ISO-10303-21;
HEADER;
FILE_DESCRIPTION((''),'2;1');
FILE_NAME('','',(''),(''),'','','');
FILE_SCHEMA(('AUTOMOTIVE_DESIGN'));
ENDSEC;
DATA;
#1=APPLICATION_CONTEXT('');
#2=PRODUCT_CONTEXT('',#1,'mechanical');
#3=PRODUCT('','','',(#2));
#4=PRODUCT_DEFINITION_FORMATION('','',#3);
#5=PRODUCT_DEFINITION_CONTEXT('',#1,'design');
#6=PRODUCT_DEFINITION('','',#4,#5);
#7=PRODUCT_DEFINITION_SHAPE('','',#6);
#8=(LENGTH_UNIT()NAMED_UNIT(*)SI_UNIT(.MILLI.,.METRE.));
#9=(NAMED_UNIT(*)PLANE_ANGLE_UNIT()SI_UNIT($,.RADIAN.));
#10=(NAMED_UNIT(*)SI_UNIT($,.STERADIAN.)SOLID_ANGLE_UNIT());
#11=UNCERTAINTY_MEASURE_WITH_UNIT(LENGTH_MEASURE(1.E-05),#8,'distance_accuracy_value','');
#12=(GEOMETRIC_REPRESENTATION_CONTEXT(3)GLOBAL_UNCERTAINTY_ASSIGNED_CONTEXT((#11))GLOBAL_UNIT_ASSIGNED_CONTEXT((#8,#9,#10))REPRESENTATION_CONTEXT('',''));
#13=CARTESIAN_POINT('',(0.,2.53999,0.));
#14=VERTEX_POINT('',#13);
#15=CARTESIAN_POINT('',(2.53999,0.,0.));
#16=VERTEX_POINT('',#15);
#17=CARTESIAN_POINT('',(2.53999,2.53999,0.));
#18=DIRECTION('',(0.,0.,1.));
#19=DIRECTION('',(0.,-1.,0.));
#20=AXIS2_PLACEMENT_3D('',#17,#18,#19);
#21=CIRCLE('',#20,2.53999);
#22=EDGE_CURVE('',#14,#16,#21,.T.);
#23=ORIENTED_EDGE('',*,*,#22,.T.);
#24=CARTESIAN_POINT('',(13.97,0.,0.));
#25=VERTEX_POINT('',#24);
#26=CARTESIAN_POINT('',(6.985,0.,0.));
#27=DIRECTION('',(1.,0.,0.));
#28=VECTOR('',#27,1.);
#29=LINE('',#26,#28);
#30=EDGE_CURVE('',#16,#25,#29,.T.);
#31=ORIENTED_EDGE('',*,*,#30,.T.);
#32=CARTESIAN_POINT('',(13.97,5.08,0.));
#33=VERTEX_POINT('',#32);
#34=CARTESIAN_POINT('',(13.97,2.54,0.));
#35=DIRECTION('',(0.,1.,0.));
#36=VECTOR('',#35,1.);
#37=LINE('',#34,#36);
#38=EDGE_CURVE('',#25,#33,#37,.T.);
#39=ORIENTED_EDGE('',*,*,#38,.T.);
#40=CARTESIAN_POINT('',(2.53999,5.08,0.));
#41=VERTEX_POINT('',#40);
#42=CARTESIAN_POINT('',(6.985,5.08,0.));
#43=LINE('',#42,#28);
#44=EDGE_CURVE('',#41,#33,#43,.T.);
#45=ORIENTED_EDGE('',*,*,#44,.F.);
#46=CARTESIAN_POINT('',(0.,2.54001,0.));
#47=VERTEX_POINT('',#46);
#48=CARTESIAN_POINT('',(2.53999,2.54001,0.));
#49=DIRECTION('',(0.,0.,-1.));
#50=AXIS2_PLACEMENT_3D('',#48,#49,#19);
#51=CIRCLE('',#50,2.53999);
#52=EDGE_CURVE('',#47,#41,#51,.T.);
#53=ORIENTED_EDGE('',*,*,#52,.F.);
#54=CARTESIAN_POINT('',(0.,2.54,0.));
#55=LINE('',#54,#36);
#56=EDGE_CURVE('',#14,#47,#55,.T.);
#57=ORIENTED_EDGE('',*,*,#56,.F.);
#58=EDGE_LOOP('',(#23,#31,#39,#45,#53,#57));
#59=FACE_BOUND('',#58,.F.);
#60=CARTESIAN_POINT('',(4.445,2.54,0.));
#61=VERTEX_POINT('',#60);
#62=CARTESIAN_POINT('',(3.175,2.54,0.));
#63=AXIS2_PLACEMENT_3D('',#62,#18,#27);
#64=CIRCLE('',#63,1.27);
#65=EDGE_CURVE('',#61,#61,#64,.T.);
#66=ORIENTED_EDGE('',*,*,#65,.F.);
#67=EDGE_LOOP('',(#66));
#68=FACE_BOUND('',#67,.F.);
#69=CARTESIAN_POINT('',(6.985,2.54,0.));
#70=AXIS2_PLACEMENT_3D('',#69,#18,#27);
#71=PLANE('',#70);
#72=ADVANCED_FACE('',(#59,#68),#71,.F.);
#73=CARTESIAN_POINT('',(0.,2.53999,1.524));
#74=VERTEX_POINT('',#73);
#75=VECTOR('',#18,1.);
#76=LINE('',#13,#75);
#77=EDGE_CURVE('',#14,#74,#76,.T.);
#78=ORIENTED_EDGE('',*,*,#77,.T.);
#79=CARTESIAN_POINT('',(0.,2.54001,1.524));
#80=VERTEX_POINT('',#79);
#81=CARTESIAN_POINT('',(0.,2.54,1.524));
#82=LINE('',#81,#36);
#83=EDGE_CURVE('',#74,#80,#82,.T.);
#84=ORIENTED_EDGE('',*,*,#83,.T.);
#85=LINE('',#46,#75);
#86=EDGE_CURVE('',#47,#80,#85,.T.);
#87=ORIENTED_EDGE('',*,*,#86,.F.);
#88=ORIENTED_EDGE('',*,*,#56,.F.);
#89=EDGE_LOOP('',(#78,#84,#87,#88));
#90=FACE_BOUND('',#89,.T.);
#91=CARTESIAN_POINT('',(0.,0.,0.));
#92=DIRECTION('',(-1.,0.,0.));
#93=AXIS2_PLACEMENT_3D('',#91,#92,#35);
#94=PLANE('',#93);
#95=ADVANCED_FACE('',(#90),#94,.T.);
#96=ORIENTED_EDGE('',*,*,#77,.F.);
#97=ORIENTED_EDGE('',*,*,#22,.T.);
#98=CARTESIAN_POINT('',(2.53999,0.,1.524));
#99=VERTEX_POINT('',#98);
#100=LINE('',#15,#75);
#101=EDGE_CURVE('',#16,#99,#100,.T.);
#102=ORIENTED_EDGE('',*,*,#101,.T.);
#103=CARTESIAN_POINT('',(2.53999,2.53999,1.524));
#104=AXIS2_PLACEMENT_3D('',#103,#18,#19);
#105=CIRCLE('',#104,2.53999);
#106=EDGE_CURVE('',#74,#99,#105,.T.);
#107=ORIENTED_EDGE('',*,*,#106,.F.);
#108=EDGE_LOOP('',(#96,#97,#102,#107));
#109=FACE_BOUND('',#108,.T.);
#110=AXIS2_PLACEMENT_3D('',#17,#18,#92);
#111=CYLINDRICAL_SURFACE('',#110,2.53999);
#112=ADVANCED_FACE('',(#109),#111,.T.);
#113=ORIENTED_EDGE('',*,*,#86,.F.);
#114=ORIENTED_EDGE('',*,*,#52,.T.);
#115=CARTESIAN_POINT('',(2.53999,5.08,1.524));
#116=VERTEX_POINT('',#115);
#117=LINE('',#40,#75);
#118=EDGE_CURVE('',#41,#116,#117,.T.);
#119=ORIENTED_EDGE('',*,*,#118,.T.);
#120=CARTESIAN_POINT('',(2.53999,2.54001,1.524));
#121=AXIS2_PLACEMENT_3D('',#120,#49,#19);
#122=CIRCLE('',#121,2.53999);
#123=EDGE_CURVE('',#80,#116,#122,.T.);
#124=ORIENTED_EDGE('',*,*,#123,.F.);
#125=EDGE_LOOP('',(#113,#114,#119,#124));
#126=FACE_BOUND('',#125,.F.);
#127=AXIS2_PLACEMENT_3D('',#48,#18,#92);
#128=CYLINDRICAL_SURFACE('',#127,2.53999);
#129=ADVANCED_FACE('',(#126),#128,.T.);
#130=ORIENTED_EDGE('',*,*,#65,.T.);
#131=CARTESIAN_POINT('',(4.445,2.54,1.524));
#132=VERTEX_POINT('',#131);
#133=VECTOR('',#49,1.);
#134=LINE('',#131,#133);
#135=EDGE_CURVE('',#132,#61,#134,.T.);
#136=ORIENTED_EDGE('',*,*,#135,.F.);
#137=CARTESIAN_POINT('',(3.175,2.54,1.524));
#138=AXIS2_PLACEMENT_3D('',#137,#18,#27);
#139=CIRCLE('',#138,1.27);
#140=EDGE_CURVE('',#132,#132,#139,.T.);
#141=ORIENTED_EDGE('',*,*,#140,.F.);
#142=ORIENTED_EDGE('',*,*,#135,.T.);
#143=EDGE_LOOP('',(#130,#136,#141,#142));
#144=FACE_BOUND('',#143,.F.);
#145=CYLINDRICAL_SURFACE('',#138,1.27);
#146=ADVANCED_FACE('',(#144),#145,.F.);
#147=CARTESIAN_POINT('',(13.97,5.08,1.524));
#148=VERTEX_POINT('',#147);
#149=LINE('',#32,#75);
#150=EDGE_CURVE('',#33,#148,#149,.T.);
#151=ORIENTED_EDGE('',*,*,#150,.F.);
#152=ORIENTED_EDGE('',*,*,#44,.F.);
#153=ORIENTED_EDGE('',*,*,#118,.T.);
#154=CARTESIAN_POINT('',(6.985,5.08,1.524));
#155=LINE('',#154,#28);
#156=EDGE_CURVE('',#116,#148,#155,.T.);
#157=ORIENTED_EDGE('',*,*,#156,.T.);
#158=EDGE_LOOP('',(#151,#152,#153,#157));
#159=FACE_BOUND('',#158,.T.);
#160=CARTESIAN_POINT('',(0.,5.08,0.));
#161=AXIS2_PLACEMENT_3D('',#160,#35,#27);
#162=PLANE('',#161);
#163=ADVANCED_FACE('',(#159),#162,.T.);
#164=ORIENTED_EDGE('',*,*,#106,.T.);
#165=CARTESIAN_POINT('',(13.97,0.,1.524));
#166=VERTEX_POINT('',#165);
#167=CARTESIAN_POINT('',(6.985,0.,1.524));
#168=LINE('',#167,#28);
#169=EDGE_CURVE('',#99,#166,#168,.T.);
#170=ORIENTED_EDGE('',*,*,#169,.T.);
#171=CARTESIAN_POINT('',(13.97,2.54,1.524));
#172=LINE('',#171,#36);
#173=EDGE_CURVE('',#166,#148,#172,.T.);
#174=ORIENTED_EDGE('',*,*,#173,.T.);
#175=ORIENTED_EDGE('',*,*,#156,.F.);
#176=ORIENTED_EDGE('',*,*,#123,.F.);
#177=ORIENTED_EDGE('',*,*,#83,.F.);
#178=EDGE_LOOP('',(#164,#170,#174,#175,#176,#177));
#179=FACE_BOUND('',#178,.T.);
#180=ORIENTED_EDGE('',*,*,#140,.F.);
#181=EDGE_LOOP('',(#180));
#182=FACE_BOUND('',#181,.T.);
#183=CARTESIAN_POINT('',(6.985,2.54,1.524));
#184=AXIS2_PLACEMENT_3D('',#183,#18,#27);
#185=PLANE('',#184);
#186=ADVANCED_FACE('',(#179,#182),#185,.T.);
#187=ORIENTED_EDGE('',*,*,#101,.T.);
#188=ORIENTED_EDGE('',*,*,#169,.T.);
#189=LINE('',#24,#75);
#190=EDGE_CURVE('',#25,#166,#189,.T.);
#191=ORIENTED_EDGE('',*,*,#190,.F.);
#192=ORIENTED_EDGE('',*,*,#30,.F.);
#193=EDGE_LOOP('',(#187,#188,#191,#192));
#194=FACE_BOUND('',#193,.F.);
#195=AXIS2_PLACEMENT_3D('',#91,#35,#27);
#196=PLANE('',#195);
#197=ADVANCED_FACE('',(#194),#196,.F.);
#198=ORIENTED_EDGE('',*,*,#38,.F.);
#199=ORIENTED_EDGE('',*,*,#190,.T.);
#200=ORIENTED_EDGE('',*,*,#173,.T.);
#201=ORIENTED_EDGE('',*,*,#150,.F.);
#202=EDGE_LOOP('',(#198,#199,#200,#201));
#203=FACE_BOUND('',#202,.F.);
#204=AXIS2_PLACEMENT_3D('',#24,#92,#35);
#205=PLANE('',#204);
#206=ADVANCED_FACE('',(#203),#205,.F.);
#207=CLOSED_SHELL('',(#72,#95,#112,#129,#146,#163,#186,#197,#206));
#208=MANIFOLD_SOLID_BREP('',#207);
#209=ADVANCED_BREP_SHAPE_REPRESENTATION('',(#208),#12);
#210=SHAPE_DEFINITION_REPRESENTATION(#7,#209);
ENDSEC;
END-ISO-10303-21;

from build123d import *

# Parameters (mm, degrees)
F0_W     = 13.97
F0_H     = 5.08
F1_DEPTH = 1.524
F2_R     = 1.27
F3_DEPTH = 25.4
F4_R     = 2.53999


# Not quite as in the source:
# - a fillet or chamfer is up to 0.001 mm smaller than in the source, because OpenCascade refuses the exact size


with BuildPart() as f1:
    # F0 (on Top) → F1 (new body)
    with BuildSketch(Plane.XY):
        with Locations((6.985, 2.54)):
            Rectangle(F0_W, F0_H)
    extrude(amount=F1_DEPTH)

    # F2 (on face) → F3 (cut)
    with BuildSketch(Plane.XY.offset(1.524)):
        with Locations((3.175, 2.54)):
            Circle(F2_R)
    extrude(amount=-F3_DEPTH, mode=Mode.SUBTRACT)

    # F4 (radius 2.54 in the source; OpenCascade refuses exactly that, so slightly less here)
    f4_edges = [f1.edges().sort_by_distance(p)[0] for p in [
        (0, 0, 0.762),
        (0, 5.08, 0.762),
    ]]
    fillet(f4_edges, radius=F4_R)


solid = f1.part
